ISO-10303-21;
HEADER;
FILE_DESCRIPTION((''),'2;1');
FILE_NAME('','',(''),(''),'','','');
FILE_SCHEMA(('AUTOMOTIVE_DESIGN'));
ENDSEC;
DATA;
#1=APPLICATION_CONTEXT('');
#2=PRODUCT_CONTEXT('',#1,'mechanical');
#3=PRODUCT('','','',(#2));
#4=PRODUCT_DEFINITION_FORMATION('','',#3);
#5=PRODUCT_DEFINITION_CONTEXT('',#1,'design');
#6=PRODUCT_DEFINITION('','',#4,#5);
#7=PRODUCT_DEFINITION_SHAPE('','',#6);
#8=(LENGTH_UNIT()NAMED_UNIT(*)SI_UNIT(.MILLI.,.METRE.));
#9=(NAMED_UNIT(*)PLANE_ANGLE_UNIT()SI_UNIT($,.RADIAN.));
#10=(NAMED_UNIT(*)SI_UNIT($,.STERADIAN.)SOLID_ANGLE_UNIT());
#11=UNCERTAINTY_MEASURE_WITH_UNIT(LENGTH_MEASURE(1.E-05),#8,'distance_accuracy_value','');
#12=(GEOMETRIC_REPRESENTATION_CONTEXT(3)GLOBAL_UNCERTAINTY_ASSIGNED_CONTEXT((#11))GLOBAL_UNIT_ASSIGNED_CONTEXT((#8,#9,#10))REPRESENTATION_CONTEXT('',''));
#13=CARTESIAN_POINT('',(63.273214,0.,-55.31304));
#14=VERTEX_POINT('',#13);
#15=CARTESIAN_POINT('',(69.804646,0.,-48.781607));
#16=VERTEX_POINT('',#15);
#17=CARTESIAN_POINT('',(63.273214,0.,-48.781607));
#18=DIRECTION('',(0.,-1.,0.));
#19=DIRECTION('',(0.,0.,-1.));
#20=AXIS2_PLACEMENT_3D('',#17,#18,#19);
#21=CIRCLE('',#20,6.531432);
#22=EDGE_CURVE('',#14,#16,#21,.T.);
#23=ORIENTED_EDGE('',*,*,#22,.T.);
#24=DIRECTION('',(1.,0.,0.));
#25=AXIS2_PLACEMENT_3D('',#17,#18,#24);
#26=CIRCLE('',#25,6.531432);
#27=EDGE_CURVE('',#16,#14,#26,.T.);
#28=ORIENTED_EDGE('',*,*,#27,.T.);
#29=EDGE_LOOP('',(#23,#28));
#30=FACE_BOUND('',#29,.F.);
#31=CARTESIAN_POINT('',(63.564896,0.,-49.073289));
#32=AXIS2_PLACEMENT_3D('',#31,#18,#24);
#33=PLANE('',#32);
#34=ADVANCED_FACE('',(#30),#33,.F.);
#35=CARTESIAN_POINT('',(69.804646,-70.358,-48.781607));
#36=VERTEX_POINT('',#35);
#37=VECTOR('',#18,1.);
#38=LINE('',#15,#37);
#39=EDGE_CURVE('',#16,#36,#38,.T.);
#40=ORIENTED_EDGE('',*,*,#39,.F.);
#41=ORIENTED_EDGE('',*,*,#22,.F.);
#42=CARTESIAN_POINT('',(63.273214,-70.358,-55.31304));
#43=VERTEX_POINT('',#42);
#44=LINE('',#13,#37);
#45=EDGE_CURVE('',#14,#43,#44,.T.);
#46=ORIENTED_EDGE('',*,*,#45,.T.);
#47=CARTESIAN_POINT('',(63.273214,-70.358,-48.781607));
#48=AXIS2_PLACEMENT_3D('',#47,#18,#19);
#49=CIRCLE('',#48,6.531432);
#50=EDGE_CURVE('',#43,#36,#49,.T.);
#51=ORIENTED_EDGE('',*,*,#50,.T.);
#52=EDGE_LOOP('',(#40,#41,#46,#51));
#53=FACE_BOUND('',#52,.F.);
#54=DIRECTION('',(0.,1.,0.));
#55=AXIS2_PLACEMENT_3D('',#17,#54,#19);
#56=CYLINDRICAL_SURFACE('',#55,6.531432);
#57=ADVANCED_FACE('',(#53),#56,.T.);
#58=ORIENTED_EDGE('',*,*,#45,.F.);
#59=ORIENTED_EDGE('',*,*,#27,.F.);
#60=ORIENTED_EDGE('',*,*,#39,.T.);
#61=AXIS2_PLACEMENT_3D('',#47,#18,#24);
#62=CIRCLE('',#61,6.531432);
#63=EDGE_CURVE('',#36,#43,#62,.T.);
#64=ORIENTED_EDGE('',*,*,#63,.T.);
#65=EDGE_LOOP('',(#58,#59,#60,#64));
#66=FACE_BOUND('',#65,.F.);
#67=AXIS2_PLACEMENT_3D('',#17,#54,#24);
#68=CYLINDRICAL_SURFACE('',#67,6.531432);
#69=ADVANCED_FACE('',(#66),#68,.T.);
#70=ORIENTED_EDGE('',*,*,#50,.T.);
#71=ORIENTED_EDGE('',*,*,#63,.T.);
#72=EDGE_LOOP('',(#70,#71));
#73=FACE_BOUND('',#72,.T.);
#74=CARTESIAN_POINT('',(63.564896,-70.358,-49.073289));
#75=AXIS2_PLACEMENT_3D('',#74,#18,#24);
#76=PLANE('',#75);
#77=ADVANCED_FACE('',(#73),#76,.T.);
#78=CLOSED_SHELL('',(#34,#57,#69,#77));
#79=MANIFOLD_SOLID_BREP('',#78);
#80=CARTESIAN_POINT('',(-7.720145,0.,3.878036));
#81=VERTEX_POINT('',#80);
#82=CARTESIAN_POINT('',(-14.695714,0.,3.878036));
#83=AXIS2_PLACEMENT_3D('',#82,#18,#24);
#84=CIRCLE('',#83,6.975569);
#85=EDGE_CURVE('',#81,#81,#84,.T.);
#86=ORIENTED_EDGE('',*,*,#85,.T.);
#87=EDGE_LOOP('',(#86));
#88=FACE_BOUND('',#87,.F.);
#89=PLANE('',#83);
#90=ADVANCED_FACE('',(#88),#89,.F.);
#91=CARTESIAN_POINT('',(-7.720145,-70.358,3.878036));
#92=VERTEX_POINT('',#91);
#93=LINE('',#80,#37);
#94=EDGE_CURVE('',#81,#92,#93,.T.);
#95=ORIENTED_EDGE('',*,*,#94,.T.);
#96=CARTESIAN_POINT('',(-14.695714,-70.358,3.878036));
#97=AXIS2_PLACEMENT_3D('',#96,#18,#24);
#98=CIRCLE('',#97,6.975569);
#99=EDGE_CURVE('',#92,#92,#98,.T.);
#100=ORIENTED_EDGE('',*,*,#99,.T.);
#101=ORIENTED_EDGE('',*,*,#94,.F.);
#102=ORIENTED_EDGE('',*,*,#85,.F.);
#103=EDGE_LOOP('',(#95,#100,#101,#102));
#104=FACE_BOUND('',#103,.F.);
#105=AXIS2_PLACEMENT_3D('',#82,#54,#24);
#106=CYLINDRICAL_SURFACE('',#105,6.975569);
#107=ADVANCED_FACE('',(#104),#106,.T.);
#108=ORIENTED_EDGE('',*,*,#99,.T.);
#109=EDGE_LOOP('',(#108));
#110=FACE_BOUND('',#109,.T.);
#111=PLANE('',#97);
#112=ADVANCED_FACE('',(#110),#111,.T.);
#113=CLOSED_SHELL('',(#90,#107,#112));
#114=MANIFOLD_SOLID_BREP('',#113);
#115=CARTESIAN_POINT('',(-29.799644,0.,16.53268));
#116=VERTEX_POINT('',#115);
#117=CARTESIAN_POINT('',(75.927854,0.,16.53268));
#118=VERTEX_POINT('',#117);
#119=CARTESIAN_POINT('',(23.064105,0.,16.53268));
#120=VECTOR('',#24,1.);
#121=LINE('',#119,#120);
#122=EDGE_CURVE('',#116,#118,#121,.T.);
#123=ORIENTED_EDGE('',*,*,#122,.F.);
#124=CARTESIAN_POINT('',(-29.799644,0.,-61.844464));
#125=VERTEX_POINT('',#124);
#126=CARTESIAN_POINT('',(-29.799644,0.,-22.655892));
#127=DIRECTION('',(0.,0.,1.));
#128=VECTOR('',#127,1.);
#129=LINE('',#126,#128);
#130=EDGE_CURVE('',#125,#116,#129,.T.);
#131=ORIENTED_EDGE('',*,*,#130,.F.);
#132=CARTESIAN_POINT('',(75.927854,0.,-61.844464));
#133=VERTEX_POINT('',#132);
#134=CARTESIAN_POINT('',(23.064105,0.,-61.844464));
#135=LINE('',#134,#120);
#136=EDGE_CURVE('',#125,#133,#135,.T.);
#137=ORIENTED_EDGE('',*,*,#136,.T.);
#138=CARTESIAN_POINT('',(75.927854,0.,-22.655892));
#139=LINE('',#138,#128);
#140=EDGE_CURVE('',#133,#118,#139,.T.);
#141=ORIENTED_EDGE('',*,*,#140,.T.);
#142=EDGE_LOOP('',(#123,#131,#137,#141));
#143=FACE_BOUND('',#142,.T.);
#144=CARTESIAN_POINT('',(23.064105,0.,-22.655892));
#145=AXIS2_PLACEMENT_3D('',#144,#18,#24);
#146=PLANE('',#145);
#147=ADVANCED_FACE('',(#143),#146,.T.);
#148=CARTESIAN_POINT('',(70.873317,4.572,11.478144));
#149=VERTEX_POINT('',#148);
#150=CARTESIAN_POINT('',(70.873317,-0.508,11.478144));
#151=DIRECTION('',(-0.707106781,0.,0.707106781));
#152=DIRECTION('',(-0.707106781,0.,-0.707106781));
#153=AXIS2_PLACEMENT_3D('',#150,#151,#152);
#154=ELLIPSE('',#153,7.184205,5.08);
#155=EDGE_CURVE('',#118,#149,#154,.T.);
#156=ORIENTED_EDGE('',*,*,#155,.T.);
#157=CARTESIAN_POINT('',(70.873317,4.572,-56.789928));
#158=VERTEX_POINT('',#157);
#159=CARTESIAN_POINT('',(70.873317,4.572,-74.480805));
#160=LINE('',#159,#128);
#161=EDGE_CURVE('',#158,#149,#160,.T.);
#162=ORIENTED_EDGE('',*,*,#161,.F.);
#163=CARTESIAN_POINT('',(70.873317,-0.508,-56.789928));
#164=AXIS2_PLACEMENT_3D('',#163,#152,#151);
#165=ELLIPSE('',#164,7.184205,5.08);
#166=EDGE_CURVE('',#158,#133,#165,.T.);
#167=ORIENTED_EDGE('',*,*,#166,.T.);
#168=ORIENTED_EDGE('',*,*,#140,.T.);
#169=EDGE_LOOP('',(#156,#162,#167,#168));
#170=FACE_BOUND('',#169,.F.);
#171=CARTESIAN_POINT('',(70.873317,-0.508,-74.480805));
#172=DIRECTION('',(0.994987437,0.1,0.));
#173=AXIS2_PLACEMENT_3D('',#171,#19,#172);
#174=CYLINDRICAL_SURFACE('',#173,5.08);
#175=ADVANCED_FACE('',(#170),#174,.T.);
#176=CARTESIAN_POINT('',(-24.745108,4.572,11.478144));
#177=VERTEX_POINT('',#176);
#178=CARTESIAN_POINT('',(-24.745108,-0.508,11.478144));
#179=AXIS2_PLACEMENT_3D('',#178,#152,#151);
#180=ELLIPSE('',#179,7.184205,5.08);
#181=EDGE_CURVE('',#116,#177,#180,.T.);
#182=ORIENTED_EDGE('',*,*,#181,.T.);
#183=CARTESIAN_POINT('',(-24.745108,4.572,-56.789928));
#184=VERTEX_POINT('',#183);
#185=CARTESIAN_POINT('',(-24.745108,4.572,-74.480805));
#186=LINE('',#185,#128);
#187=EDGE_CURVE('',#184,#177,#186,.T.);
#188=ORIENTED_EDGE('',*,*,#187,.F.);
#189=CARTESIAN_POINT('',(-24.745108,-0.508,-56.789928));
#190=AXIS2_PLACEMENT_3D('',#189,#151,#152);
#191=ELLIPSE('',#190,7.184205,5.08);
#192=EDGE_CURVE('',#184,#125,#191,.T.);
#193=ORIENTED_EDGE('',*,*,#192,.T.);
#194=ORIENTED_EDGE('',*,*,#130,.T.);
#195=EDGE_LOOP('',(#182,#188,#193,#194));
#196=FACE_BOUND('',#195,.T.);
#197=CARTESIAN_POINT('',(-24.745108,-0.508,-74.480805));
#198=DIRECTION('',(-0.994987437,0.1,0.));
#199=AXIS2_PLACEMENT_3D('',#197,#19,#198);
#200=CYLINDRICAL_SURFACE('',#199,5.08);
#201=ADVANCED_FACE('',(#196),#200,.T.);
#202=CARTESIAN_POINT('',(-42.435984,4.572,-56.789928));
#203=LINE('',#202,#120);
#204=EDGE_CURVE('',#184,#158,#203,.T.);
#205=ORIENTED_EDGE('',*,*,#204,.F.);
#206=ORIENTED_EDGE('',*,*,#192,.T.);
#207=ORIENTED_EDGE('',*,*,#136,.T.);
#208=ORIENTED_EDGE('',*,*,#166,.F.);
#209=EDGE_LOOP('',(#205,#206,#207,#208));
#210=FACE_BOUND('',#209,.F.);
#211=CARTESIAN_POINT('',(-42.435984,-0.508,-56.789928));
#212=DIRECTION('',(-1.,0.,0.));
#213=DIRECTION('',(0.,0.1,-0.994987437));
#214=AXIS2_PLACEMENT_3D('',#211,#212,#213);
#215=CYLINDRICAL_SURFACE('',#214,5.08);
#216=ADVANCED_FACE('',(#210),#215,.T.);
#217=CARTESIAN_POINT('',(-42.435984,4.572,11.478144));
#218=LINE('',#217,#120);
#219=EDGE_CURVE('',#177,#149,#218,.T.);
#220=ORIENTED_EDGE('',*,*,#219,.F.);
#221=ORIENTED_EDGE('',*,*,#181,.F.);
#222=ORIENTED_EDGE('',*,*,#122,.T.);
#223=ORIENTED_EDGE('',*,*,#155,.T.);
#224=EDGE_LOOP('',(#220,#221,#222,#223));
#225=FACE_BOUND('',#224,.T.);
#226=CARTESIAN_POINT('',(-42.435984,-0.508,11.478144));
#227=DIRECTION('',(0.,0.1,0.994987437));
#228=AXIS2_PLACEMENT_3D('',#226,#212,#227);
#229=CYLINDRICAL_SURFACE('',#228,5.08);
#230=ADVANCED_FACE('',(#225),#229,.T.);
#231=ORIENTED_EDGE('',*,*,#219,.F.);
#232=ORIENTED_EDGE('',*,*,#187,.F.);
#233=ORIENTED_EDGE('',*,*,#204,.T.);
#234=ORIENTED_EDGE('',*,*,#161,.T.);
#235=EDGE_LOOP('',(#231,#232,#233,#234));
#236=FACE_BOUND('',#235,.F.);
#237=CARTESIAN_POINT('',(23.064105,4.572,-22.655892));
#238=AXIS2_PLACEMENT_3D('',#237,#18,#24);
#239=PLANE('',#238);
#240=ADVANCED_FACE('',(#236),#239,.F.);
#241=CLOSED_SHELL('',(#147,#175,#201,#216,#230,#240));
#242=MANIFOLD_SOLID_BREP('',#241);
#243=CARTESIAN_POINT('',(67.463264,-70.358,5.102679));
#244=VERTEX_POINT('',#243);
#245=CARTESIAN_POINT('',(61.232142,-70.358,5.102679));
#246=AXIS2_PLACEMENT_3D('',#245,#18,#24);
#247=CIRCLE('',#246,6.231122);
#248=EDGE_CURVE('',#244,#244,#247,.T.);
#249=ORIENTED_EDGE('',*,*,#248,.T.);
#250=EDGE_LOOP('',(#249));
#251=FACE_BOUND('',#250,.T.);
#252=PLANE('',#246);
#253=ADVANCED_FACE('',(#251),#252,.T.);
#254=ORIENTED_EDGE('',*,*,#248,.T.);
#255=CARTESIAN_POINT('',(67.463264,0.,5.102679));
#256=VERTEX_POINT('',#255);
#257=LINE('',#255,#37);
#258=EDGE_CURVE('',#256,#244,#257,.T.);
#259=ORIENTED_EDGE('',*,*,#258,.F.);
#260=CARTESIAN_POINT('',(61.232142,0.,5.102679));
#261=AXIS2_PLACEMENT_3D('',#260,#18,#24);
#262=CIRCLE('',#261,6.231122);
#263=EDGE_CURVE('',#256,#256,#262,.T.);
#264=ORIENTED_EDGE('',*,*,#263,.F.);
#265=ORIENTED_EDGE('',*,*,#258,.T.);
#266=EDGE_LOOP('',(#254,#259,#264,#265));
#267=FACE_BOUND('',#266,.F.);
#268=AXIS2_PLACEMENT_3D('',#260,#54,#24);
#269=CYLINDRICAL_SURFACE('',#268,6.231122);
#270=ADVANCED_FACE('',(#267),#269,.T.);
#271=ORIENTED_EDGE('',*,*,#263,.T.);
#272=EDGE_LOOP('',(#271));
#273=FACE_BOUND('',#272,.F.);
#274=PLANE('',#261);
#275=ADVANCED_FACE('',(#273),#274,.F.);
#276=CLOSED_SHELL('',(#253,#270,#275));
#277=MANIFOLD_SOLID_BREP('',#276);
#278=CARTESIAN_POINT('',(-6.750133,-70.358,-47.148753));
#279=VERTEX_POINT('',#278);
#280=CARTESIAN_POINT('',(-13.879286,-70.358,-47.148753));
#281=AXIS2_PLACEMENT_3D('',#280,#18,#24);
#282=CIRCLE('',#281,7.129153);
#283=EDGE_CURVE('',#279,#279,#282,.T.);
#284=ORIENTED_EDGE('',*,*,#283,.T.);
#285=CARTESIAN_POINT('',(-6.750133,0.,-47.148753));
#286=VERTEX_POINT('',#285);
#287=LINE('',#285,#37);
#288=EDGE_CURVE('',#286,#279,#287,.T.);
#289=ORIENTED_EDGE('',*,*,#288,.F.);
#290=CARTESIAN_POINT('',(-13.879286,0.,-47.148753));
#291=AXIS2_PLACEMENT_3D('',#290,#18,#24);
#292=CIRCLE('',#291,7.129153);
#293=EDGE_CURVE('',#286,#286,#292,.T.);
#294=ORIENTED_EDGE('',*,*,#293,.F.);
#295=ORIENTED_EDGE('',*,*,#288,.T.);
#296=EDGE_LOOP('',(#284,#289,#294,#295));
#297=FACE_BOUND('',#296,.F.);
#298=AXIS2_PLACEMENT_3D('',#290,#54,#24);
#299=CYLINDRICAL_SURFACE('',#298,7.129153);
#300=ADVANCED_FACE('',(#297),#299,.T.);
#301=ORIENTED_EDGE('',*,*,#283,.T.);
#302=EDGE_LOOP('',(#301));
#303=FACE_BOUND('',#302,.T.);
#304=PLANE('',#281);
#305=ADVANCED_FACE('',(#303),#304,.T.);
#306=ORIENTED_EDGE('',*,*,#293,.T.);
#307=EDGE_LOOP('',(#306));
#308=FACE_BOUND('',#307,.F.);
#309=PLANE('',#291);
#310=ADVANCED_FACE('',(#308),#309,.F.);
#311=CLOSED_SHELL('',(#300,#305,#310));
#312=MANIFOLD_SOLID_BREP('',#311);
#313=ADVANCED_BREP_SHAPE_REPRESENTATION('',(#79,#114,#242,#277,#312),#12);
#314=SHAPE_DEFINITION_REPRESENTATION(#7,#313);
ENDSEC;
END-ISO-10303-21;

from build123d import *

# Parameters (mm, degrees)
F0_R        = 6.9755689081
F1_DEPTH    = 70.358
F0_R_2      = 7.1291532236
F0_R_3      = 6.2311216895
F2_W        = 105.7274974883
F2_H        = 78.3771444112
F3_DEPTH    = 4.572
F4_T1_DEPTH = 131.0001783908
F4_T3_DEPTH = 103.6498253137


# Not quite as in the source:
# - a fillet or chamfer that OpenCascade refuses, or shapes differently, is made with other operations: its cross-section is extruded or revolved along the edge and cut away or added


with BuildPart() as f1:
    # F0 (on Front) → F1 (new body)
    with BuildSketch(Plane.XZ):
        with Locations((-14.6957142279, 3.8780358154)):
            Circle(F0_R)
    extrude(amount=F1_DEPTH)


with BuildPart() as f1b:
    # F0 (on Front) → F1, piece 2 (new body)
    with BuildSketch(Plane.XZ):
        with Locations((-13.8792861253, -47.1487529576)):
            Circle(F0_R_2)
    extrude(amount=F1_DEPTH)


with BuildPart() as f1c:
    # F0 (on Front) → F1, piece 3 (new body)
    with BuildSketch(Plane.XZ):
        with Locations((61.2321421504, 5.1026786678)):
            Circle(F0_R_3)
    extrude(amount=F1_DEPTH)


with BuildPart() as f1d:
    # F0 (on Front) → F1, piece 4 (new body)
    with BuildSketch(Plane.XZ):
        with BuildLine():
            ThreePointArc((69.8046460748, -48.7816073), (58.6547937541, -44.1631872504), (63.2732138038, -55.313039571))
            ThreePointArc((63.2732138038, -55.313039571), (67.8916338535, -53.4000273497), (69.8046460748, -48.7816073))
        make_face()
    extrude(amount=F1_DEPTH)


with BuildPart() as f3:
    # F2 (on Front) → F3 (new body)
    with BuildSketch(Plane.XZ):
        with Locations((23.0641048402, -22.6558921859)):
            Rectangle(F2_W, F2_H)
    extrude(amount=-F3_DEPTH)

    # F4: fillet of radius 5.08 on 4 edges, made by hand

    # F4_s2 → F4_t1 (cut)
    with BuildSketch(Plane.YZ.offset(-42.4359843552)):
        with BuildLine():
            ThreePointArc((0, 16.5326800197), (3.2594288314, 14.8859114369), (4.572, 11.4781438392))
            Line((4.572, 11.4781438392), (4.572, 16.5326800197))
            Line((4.572, 16.5326800197), (0, 16.5326800197))
        make_face()
        with BuildLine():
            ThreePointArc((0, -61.8444643915), (3.2594288314, -60.1976958087), (4.572, -56.789928211))
            Line((4.572, -56.789928211), (4.572, -61.8444643915))
            Line((4.572, -61.8444643915), (0, -61.8444643915))
        make_face()
    extrude(amount=F4_T1_DEPTH, mode=Mode.SUBTRACT)

    # F4_s4 → F4_t3 (cut)
    with BuildSketch(Plane.XY.offset(-74.4808048427)):
        with BuildLine():
            ThreePointArc((75.9278535843, 0), (74.2810850015, 3.2594288314), (70.8733174038, 4.572))
            Line((70.8733174038, 4.572), (75.9278535843, 4.572))
            Line((75.9278535843, 4.572), (75.9278535843, 0))
        make_face()
        with BuildLine():
            ThreePointArc((-29.799643904, 0), (-28.1528753212, 3.2594288314), (-24.7451077235, 4.572))
            Line((-24.7451077235, 4.572), (-29.799643904, 4.572))
            Line((-29.799643904, 4.572), (-29.799643904, 0))
        make_face()
    extrude(amount=F4_T3_DEPTH, mode=Mode.SUBTRACT)


solid = Compound([f1.part, f1b.part, f1c.part, f1d.part, f3.part])
